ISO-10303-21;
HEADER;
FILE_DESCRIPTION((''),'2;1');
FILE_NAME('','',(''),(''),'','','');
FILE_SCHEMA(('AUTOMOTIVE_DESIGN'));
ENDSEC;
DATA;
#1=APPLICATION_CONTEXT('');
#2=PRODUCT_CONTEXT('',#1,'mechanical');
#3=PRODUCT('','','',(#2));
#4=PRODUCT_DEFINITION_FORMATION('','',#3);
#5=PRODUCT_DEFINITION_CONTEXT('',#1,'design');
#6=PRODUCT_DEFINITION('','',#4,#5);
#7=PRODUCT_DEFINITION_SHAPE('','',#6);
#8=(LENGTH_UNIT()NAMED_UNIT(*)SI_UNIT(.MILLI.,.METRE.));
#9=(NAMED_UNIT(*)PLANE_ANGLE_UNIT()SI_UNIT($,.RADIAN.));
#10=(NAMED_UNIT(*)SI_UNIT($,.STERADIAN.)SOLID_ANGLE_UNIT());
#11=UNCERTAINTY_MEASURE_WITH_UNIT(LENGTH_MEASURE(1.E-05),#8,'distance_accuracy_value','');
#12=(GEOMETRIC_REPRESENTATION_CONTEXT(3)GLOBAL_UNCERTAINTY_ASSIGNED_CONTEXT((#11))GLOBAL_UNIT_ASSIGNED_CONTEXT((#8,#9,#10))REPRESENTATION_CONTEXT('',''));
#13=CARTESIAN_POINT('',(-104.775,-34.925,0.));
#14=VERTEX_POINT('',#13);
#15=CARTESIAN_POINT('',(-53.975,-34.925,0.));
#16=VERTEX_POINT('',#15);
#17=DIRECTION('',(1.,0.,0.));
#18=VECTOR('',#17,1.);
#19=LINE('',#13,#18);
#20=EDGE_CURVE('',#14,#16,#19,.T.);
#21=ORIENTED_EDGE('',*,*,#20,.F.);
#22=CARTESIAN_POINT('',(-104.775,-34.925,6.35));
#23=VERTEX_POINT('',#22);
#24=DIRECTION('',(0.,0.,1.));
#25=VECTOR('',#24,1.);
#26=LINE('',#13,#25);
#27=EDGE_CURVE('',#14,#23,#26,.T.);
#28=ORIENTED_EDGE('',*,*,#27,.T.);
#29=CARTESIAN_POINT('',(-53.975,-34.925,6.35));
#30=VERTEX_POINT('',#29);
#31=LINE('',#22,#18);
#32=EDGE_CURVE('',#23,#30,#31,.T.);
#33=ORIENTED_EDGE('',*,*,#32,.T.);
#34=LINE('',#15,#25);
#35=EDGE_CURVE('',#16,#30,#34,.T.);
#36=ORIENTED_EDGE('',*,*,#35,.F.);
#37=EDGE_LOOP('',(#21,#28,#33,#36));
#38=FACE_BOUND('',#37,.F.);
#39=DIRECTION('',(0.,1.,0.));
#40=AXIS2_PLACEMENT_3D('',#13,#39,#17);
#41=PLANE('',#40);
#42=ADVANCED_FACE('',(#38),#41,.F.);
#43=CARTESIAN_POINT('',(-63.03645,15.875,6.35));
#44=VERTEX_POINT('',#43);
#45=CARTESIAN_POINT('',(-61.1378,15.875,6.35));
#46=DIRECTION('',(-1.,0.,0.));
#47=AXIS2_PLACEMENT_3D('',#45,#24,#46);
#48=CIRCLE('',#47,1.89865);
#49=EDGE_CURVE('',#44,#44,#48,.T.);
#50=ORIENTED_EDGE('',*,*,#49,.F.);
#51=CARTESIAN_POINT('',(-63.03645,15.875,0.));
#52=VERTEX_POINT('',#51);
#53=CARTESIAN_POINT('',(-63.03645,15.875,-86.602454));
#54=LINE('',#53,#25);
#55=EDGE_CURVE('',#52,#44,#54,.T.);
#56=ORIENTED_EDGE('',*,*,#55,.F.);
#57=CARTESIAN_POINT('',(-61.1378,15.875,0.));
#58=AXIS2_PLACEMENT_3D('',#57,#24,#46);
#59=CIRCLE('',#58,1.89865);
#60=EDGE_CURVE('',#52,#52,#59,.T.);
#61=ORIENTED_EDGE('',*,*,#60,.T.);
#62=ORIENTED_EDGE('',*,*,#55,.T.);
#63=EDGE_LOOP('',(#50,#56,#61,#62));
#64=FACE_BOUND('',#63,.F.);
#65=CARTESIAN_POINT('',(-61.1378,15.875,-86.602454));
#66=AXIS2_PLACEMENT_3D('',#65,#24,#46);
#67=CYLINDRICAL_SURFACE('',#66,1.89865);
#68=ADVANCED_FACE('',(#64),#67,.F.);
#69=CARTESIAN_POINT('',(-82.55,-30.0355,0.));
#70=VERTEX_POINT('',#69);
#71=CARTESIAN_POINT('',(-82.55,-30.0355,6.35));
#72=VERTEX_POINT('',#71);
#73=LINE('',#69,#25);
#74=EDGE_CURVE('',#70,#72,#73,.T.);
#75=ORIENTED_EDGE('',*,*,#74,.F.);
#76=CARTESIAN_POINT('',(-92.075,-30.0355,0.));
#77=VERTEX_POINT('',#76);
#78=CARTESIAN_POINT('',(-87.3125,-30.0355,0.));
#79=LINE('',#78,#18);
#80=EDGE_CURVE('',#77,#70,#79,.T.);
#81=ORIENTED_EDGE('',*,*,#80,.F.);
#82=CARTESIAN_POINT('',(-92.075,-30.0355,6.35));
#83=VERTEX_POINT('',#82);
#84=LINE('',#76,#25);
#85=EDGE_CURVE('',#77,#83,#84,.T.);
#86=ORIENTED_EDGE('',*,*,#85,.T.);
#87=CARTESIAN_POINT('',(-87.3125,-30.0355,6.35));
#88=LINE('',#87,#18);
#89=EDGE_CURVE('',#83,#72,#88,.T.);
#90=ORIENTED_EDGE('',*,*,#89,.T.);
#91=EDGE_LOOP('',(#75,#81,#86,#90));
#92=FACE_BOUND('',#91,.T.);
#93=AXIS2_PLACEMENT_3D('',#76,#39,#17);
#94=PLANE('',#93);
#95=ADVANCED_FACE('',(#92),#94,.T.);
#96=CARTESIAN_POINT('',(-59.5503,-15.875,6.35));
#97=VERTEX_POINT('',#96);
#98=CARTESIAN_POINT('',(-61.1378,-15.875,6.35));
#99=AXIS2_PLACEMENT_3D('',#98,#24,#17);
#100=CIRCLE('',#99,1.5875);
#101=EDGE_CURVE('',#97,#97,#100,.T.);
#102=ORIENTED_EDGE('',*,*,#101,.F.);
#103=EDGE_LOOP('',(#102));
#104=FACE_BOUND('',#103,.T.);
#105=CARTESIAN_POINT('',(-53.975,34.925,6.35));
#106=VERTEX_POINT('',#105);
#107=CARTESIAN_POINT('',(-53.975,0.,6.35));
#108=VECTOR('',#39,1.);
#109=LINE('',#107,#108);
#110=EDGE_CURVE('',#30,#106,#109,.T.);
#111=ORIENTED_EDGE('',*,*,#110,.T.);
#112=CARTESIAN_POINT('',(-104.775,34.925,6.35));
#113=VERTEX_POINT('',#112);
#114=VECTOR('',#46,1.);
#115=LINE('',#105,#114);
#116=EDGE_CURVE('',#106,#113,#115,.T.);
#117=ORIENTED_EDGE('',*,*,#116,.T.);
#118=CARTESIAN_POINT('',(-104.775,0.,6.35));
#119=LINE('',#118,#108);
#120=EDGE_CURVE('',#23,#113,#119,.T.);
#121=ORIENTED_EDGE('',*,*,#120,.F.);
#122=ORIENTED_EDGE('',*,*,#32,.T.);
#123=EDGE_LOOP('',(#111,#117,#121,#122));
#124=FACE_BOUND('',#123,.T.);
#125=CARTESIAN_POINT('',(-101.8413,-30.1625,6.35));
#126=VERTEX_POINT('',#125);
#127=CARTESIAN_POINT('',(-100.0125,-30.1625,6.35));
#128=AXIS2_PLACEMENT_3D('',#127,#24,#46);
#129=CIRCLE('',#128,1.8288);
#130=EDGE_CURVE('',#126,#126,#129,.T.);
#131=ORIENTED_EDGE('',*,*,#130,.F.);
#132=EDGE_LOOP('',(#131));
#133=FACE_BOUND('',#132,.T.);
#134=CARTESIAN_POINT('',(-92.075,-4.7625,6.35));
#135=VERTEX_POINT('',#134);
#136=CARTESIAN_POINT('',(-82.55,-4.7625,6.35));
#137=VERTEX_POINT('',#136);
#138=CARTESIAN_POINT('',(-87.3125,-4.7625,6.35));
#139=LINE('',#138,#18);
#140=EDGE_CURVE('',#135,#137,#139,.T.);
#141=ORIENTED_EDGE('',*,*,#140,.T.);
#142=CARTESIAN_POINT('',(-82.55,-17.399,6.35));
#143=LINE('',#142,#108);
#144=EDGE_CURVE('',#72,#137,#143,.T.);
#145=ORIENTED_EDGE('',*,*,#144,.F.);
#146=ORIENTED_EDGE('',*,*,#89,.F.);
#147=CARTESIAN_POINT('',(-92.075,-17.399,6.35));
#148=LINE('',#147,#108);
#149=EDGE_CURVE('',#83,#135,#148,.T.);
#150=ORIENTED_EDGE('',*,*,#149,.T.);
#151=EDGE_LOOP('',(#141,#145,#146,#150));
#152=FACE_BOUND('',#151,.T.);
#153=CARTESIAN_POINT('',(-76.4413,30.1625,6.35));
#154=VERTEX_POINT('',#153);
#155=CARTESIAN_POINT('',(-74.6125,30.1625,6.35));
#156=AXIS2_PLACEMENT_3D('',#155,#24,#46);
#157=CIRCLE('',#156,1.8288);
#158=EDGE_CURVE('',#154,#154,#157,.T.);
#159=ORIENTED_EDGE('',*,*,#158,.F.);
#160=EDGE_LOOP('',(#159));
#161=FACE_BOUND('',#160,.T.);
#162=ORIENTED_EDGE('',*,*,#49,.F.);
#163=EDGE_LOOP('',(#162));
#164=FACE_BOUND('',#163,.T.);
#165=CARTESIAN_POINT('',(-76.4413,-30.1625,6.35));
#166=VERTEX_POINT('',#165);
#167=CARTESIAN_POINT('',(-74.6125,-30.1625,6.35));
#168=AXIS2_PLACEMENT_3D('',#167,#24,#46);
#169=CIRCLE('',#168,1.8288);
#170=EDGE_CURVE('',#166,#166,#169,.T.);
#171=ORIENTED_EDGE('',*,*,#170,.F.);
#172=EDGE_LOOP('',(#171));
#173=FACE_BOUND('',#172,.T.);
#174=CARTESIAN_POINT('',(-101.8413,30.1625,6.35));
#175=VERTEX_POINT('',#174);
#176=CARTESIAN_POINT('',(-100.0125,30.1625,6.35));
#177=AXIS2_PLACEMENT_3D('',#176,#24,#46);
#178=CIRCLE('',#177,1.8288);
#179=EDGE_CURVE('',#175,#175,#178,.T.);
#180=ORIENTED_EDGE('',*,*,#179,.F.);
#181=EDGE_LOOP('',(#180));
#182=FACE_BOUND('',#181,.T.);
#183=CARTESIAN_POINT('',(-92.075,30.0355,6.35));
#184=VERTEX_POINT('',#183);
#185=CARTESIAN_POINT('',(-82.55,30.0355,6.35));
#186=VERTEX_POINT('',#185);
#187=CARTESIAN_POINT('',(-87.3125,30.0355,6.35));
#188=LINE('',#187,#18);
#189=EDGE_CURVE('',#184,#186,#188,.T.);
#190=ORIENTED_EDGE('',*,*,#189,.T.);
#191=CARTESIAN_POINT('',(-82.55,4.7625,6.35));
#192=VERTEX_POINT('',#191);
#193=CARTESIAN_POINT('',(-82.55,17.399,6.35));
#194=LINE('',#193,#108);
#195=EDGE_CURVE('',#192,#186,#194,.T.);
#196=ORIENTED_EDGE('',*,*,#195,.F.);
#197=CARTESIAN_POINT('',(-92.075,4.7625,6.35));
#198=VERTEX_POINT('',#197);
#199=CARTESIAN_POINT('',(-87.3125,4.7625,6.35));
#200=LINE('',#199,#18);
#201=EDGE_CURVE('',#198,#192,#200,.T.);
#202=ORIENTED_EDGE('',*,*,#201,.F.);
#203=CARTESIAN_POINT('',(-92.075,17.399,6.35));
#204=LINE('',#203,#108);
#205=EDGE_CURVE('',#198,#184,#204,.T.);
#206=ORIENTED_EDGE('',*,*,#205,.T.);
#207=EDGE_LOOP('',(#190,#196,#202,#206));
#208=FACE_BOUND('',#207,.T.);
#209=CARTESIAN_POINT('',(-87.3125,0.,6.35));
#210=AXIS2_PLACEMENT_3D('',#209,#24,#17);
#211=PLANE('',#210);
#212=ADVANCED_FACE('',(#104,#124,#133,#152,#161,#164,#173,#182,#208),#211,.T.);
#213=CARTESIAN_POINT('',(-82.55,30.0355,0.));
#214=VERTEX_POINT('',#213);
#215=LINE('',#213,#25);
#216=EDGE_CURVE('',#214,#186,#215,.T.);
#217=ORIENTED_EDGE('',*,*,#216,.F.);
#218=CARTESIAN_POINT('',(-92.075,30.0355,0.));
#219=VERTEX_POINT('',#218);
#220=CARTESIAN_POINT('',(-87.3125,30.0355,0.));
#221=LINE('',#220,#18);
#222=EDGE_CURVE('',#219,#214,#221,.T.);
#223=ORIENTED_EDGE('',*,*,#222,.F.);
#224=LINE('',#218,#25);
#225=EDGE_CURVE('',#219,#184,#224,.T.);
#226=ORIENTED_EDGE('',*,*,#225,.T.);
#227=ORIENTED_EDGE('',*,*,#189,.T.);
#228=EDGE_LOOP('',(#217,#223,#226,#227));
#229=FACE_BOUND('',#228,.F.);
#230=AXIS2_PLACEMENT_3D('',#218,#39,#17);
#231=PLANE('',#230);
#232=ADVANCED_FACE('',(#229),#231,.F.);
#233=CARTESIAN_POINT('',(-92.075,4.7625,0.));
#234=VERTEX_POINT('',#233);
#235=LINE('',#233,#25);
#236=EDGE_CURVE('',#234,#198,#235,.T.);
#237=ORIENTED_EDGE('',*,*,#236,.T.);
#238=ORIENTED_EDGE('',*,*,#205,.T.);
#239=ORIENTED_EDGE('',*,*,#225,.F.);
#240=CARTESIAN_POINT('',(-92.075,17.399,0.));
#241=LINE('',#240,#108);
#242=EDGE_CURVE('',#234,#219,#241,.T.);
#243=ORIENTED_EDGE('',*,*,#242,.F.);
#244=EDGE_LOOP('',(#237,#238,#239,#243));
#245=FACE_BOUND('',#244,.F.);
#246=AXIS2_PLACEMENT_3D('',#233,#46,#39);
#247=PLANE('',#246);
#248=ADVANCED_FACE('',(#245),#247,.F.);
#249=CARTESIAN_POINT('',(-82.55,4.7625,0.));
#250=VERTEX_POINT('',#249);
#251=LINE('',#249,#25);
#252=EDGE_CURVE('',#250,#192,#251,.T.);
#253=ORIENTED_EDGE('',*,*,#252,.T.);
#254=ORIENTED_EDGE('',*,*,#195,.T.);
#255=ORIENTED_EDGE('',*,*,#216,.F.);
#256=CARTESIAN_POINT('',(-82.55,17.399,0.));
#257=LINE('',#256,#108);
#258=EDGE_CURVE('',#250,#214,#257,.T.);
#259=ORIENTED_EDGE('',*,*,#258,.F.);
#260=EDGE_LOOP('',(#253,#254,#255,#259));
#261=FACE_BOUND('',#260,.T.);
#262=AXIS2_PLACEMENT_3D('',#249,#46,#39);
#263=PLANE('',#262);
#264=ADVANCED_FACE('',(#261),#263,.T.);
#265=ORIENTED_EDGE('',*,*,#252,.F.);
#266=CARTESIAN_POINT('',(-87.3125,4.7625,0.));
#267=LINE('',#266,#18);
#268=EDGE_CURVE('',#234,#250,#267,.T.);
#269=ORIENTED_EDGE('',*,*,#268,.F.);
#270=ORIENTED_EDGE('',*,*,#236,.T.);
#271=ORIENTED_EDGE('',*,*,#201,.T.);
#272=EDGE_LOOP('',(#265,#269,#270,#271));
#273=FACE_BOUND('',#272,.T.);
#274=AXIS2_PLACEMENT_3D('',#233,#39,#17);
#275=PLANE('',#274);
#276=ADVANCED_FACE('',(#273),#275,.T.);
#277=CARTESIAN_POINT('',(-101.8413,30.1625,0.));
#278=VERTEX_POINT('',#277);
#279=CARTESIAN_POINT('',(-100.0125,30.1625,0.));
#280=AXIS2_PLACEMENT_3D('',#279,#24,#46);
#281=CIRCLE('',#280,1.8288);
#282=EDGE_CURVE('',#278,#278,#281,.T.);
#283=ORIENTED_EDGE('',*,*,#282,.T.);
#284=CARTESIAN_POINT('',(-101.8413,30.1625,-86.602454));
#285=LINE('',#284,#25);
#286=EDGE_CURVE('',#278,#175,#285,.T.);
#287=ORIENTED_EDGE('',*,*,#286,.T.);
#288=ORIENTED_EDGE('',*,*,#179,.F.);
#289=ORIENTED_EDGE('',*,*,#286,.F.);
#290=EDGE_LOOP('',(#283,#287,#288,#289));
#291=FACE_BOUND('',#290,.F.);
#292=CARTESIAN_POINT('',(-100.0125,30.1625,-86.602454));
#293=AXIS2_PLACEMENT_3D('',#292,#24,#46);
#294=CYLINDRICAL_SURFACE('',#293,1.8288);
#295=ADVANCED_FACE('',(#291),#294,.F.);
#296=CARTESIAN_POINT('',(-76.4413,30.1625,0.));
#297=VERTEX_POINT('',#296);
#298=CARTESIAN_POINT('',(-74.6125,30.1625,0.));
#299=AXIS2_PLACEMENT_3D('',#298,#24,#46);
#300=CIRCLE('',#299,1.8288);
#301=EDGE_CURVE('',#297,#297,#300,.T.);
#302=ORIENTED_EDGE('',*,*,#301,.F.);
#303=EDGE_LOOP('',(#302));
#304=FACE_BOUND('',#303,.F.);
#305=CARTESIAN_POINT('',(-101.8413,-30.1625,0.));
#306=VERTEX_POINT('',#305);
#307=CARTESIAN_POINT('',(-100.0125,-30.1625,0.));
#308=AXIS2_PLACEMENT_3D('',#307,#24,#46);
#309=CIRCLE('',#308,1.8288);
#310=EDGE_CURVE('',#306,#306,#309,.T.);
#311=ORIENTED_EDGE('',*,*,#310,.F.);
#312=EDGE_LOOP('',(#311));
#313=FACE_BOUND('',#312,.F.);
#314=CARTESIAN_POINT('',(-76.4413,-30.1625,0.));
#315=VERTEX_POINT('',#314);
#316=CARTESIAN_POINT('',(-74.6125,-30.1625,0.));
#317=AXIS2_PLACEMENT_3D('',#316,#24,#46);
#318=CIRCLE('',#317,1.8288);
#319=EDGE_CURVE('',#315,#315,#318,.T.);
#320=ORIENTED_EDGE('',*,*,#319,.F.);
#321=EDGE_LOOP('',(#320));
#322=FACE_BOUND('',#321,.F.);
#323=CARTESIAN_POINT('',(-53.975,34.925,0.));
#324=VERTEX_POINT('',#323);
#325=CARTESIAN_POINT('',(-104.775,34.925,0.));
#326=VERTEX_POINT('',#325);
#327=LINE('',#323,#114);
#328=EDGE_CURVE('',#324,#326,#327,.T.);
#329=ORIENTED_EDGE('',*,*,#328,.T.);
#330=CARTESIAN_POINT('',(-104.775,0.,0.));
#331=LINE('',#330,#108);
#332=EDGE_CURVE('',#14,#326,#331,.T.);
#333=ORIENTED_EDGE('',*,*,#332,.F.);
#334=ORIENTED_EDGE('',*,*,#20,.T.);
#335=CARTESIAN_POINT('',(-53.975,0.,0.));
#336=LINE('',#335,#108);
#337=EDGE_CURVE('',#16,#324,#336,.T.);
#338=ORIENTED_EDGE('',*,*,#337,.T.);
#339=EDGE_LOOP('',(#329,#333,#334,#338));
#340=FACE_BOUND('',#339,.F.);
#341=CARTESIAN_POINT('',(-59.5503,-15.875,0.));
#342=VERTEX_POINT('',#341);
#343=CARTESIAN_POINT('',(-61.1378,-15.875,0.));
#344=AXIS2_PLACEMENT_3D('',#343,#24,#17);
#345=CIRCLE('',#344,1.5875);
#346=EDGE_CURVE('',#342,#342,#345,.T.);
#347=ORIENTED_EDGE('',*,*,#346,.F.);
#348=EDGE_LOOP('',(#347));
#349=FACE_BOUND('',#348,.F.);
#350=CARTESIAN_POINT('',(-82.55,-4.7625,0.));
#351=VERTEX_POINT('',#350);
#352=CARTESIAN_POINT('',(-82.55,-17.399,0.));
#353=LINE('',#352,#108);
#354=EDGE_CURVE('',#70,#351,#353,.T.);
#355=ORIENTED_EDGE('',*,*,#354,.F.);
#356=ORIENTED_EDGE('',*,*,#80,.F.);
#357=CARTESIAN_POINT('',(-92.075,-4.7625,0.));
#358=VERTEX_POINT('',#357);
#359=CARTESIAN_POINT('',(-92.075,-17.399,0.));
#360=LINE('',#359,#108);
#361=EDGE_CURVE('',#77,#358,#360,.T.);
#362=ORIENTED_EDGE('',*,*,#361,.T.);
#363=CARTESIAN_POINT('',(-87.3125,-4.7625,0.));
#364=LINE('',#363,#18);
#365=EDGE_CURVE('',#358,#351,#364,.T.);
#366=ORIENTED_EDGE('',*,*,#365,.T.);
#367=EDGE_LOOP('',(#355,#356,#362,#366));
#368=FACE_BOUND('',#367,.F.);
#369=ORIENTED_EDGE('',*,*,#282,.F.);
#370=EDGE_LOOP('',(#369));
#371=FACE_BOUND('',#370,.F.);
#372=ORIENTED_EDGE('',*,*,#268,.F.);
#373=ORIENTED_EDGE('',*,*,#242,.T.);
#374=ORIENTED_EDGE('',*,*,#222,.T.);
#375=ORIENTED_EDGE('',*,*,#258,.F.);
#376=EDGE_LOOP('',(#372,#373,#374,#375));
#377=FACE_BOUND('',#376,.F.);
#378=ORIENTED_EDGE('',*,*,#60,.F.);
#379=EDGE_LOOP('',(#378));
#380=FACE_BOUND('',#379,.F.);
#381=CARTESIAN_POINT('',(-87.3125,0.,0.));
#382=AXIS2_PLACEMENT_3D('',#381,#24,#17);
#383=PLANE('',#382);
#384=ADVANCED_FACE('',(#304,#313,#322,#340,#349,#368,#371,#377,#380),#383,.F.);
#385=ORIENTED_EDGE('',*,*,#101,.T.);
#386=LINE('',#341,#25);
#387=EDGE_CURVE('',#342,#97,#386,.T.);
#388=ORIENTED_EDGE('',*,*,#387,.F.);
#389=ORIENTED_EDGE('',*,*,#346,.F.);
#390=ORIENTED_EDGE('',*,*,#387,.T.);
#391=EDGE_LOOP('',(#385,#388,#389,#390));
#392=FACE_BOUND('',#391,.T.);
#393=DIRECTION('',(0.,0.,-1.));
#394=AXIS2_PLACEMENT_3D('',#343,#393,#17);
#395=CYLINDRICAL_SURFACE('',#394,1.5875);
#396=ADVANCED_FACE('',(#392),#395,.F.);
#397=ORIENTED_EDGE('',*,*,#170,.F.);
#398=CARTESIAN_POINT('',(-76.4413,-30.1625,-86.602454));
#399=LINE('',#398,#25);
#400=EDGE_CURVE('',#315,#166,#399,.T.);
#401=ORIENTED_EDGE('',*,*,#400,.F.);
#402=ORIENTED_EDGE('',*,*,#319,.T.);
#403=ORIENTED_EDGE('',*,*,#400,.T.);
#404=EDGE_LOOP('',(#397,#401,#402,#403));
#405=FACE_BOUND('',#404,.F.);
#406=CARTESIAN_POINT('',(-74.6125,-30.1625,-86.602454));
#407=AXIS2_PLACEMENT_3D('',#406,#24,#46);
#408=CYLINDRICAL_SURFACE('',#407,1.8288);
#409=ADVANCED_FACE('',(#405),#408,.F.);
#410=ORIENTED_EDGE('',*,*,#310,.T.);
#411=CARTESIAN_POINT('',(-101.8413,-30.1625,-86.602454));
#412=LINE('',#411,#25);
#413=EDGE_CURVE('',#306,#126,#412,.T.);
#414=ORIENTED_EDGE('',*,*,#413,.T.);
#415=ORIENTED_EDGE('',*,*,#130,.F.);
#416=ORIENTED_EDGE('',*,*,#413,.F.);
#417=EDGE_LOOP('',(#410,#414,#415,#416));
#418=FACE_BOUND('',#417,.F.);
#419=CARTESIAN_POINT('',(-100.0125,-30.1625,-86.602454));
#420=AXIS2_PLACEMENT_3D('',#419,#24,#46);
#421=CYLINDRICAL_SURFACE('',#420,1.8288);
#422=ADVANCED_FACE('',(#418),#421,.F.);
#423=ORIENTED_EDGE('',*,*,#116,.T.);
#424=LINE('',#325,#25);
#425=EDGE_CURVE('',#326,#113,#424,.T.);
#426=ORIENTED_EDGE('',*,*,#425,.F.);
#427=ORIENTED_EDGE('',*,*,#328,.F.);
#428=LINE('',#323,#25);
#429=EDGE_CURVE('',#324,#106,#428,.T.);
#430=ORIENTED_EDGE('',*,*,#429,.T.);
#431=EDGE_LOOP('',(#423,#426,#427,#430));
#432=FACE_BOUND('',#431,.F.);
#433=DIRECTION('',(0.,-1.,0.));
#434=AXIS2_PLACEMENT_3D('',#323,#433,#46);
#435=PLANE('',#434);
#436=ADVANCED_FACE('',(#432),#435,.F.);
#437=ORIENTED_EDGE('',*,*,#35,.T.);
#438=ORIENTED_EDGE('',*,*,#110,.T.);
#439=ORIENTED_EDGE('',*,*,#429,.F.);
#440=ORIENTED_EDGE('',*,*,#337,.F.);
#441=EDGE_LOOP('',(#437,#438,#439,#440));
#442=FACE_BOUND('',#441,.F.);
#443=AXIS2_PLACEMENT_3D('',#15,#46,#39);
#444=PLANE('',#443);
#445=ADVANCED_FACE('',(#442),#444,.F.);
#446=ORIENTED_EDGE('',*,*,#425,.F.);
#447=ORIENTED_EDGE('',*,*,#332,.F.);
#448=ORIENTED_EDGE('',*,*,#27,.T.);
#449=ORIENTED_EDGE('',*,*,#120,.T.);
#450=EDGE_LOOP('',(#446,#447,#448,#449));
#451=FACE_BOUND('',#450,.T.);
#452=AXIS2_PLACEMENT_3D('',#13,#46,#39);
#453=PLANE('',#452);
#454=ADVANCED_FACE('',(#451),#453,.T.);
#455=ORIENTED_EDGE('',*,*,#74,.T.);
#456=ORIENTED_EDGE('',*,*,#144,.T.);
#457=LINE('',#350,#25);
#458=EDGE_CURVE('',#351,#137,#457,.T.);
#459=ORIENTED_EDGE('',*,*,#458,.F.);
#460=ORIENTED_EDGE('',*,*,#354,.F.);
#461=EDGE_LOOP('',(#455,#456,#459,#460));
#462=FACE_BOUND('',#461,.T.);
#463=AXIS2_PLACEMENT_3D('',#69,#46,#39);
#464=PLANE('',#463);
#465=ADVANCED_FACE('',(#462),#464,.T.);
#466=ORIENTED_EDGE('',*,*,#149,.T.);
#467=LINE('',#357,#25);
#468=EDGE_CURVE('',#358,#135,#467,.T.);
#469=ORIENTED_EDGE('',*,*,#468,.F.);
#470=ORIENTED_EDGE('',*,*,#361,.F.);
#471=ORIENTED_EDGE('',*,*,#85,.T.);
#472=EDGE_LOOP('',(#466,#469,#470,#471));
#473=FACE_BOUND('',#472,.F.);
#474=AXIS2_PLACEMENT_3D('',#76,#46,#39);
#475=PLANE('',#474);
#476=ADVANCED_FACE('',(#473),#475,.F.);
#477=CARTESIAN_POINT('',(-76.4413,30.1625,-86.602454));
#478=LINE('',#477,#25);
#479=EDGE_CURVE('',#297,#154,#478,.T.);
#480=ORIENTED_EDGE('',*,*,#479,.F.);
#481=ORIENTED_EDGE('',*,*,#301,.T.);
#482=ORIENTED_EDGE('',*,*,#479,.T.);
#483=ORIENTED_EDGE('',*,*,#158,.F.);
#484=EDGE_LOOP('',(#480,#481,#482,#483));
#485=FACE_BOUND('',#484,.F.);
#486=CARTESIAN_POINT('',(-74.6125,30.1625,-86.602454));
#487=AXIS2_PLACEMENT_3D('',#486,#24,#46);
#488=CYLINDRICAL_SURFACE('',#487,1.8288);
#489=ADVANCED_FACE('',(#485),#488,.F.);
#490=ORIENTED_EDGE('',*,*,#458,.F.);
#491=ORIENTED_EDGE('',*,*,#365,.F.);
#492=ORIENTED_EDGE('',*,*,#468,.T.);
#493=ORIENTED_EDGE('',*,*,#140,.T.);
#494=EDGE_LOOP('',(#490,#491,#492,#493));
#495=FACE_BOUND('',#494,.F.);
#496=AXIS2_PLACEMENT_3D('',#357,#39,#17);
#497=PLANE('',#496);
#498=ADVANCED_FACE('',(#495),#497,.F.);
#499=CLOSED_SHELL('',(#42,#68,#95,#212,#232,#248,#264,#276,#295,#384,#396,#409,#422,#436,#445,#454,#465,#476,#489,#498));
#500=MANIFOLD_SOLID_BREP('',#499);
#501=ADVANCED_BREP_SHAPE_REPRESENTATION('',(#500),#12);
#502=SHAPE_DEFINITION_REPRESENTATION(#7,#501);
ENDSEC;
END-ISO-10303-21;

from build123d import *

# Parameters (mm, degrees)
F0_W     = 34.925
F0_H     = 69.85
F0_R     = 1.8288
F0_W_2   = 9.525
F0_H_2   = 25.273
F0_W_3   = 15.875
F0_R_2   = 1.5875
F1_DEPTH = 6.35
F2_D     = 3.6576
F3_D     = 3.7973


# Not quite as in the source:
# - a feature names something its author has since deleted; it is built from what else it names


with BuildPart() as f1:
    # F0 (on Top) → F1 (new body)
    with BuildSketch(Plane.XY):
        with Locations((-87.3125, 0)):
            Rectangle(F0_W, F0_H)
        with Locations((-100.0125, -30.1625)):
            Circle(F0_R, mode=Mode.SUBTRACT)
        with Locations((-87.3125, -17.399)):
            Rectangle(F0_W_2, F0_H_2, mode=Mode.SUBTRACT)
        with Locations((-74.6125, -30.1625)):
            Circle(F0_R, mode=Mode.SUBTRACT)
        with Locations((-87.3125, 17.399)):
            Rectangle(F0_W_2, F0_H_2, mode=Mode.SUBTRACT)
        with Locations((-100.0125, 30.1625)):
            Circle(F0_R, mode=Mode.SUBTRACT)
        with Locations((-74.6125, 30.1625)):
            Circle(F0_R, mode=Mode.SUBTRACT)
        with Locations((-61.9125, 0)):
            Rectangle(F0_W_3, F0_H)
        with Locations((-61.1378, -15.875)):
            Circle(F0_R_2, mode=Mode.SUBTRACT)
        with Locations((-61.1378, 15.875)):
            Circle(F0_R_2, mode=Mode.SUBTRACT)
        with Locations((-100.0125, -30.1625)):
            Circle(F0_R)
        with Locations((-100.0125, 30.1625)):
            Circle(F0_R)
        with Locations((-74.6125, 30.1625)):
            Circle(F0_R)
        with Locations((-74.6125, -30.1625)):
            Circle(F0_R)
        with Locations((-61.1378, 15.875)):
            Circle(F0_R_2)
    extrude(amount=F1_DEPTH)

    # F2 (through all)
    with Locations(Plane(origin=(0, 0, 0), x_dir=(1, 0, 0), z_dir=(0, 0, -1))):
        with Locations((-100.0125, -30.1625), (-74.6125, -30.1625), (-74.6125, 30.1625), (-100.0125, 30.1625)):
            Hole(F2_D / 2)

    # F3 (through all)
    with Locations(Plane(origin=(0, 0, 0), x_dir=(1, 0, 0), z_dir=(0, 0, -1))):
        with Locations((-61.1378, -15.875)):
            Hole(F3_D / 2)


solid = f1.part
